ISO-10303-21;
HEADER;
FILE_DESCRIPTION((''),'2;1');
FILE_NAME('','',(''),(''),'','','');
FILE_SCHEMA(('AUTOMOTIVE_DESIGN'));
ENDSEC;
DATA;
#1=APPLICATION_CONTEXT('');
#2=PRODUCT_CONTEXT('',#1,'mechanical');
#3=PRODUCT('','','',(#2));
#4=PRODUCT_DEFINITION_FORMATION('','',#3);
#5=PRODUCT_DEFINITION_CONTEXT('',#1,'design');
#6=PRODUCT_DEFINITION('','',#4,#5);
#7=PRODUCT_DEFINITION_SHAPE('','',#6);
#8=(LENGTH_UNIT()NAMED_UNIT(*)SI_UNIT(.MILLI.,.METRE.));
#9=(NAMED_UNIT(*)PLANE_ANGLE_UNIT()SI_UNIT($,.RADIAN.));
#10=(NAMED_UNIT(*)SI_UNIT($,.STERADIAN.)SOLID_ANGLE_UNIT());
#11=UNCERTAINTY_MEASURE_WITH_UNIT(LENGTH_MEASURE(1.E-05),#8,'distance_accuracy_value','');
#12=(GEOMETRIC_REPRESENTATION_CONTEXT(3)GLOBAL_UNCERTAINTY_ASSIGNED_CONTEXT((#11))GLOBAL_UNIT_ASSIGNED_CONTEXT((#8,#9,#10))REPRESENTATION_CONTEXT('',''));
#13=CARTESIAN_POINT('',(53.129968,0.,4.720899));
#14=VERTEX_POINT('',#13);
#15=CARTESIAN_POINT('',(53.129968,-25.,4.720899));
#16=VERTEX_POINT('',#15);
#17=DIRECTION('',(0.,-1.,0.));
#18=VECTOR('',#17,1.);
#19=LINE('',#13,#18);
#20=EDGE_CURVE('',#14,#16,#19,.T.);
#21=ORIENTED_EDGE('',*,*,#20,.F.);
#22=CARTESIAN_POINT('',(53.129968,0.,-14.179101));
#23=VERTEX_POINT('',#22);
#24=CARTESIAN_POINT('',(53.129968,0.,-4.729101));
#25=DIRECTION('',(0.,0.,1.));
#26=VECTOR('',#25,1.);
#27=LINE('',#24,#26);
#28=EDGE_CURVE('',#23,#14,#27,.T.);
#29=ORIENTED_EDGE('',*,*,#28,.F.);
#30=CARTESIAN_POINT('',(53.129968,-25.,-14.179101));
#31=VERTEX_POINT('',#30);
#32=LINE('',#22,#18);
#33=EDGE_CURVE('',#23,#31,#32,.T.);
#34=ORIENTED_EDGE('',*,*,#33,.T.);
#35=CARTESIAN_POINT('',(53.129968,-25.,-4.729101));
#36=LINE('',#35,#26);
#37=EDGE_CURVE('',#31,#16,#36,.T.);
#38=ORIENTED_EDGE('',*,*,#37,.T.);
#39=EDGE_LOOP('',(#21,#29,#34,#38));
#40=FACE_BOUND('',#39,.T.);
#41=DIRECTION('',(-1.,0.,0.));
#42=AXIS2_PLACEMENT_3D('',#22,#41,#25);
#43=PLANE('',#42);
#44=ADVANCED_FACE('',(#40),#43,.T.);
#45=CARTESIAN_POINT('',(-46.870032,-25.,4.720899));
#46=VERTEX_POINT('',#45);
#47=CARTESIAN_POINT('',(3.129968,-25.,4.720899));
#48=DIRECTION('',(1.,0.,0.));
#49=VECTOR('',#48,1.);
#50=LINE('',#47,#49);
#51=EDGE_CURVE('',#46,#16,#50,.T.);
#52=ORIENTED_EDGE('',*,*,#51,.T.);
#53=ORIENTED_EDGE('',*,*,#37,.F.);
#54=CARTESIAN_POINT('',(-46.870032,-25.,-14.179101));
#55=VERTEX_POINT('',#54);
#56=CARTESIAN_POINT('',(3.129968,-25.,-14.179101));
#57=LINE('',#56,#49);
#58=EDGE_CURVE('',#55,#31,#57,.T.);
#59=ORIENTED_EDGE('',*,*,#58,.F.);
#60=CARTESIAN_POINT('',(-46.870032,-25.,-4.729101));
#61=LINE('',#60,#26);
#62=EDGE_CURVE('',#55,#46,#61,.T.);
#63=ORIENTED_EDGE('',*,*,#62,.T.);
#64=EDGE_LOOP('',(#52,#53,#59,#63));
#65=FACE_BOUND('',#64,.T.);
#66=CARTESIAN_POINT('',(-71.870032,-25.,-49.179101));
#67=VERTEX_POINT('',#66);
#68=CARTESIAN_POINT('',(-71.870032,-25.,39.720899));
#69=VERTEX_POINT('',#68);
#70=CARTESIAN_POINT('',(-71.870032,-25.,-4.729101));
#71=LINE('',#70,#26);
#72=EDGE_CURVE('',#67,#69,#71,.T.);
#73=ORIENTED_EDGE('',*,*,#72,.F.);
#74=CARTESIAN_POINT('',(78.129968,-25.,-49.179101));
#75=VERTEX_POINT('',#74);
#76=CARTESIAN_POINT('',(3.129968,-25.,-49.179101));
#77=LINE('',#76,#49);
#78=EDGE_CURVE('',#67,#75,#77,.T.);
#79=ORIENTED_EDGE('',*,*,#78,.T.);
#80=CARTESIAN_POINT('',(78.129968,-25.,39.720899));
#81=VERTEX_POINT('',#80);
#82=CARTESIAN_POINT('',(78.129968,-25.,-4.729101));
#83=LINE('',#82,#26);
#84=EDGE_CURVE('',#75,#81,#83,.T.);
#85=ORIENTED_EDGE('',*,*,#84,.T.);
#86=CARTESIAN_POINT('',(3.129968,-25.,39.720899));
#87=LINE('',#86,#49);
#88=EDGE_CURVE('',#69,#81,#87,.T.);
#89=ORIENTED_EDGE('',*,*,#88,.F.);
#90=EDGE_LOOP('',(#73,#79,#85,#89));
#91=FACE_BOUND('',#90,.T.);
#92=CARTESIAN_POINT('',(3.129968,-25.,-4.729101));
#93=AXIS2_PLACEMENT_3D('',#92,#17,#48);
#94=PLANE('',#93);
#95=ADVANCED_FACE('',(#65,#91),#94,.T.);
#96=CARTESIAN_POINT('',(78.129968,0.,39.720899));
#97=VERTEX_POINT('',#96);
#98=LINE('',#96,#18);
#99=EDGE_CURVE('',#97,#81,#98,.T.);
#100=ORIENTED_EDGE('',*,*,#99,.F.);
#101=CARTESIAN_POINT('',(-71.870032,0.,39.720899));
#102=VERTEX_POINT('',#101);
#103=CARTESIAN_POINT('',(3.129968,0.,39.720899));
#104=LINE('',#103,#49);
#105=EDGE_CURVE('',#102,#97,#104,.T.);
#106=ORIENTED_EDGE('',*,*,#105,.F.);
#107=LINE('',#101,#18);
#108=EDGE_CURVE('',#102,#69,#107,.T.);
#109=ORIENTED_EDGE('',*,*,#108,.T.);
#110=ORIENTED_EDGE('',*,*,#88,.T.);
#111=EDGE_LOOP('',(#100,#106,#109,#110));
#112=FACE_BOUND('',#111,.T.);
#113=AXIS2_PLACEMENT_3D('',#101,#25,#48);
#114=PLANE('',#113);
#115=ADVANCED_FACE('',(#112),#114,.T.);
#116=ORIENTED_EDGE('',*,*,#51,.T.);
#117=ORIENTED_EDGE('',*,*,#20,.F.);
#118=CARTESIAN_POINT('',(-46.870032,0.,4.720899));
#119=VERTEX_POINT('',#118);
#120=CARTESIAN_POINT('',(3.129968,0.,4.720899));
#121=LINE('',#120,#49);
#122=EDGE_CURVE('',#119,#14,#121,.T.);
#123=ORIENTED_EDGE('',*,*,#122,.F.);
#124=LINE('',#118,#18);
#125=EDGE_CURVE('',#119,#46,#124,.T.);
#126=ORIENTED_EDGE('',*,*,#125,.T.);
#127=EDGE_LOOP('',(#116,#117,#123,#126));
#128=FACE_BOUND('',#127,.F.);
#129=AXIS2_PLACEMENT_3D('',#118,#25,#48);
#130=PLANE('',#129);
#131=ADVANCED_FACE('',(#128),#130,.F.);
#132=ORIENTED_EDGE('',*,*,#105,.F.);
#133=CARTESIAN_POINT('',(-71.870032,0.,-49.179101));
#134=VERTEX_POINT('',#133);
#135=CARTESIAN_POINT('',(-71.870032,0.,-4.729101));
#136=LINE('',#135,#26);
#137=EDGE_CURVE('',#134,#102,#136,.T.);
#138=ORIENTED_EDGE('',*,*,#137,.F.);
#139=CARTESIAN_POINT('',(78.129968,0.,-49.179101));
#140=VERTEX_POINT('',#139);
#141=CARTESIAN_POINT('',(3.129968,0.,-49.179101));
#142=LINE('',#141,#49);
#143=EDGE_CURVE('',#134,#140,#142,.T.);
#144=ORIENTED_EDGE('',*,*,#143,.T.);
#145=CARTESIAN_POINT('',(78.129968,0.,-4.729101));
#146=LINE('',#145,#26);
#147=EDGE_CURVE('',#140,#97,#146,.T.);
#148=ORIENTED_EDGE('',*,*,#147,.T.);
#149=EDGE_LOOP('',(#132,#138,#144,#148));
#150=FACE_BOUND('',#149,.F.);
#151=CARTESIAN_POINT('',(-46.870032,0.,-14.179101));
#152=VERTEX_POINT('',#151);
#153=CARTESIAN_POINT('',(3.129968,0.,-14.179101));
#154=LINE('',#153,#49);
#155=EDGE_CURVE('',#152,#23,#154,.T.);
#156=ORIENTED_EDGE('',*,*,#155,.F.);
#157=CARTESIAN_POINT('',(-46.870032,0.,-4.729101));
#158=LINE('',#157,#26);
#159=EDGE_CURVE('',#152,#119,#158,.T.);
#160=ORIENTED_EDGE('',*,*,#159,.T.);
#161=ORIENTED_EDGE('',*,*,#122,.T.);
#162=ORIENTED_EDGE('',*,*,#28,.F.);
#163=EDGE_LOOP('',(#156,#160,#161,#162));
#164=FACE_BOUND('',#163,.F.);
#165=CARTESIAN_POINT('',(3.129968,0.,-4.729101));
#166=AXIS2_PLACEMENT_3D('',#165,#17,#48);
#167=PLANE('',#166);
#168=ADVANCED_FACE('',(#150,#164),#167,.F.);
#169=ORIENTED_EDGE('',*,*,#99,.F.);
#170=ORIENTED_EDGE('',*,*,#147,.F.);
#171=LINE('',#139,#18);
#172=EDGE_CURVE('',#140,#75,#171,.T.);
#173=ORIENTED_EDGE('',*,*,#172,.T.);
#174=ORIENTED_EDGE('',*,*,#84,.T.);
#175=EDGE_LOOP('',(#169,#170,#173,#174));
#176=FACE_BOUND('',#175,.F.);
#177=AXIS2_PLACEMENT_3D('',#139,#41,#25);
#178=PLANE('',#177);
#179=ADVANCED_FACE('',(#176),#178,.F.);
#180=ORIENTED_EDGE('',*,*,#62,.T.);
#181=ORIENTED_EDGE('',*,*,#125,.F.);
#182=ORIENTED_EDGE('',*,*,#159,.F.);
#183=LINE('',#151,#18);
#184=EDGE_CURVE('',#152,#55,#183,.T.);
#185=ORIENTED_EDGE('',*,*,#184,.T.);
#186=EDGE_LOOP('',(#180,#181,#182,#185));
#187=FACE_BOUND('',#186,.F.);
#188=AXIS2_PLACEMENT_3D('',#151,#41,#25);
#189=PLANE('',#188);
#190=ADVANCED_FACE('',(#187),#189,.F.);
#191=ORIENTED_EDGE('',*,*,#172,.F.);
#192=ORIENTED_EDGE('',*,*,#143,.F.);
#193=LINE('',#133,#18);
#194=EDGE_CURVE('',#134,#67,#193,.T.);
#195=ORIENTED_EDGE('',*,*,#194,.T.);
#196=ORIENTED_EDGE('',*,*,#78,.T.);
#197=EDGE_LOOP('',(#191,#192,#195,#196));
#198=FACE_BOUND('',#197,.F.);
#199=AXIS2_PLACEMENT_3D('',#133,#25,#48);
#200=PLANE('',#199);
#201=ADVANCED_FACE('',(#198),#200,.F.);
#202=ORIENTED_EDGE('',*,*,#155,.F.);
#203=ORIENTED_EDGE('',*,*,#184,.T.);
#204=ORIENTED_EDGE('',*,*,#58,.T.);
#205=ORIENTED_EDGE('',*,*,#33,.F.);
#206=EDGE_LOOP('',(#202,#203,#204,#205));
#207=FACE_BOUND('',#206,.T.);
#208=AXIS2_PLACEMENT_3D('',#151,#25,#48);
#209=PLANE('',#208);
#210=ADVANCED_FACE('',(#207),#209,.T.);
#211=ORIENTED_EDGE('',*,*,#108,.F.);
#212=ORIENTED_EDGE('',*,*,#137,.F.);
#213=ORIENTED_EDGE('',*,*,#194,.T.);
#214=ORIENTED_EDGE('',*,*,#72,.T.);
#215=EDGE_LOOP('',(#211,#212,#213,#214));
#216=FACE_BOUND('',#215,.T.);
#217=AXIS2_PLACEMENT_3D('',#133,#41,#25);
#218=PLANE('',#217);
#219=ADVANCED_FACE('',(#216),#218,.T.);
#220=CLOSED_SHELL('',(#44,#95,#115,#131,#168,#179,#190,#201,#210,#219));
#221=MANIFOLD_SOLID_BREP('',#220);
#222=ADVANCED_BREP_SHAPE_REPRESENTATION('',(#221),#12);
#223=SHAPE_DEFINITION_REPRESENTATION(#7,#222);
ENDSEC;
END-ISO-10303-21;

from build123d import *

# Parameters (mm, degrees)
F0_W     = 150
F0_H     = 88.9
F0_W_2   = 100
F0_H_2   = 18.9
F1_DEPTH = 25
F2_DEPTH = 190


# Not quite as in the source:
# - an extrude ends at something that could not be found from the text; its depth is read off the source's solid


with BuildPart() as f1:
    # F0 (on Front) → F1 (new body)
    with BuildSketch(Plane.XZ):
        with Locations((3.1299684197, -4.7291009414)):
            Rectangle(F0_W, F0_H)
        with Locations((3.1299684197, -4.7291009414)):
            Rectangle(F0_W_2, F0_H_2, mode=Mode.SUBTRACT)
    extrude(amount=F1_DEPTH)

    # F0 (on Front) → F2 (cut, through all)
    with BuildSketch(Plane.XZ):
        with Locations((3.1299684197, -4.7291009414)):
            Rectangle(F0_W_2, F0_H_2)
    extrude(amount=-F2_DEPTH, mode=Mode.SUBTRACT)


solid = f1.part
